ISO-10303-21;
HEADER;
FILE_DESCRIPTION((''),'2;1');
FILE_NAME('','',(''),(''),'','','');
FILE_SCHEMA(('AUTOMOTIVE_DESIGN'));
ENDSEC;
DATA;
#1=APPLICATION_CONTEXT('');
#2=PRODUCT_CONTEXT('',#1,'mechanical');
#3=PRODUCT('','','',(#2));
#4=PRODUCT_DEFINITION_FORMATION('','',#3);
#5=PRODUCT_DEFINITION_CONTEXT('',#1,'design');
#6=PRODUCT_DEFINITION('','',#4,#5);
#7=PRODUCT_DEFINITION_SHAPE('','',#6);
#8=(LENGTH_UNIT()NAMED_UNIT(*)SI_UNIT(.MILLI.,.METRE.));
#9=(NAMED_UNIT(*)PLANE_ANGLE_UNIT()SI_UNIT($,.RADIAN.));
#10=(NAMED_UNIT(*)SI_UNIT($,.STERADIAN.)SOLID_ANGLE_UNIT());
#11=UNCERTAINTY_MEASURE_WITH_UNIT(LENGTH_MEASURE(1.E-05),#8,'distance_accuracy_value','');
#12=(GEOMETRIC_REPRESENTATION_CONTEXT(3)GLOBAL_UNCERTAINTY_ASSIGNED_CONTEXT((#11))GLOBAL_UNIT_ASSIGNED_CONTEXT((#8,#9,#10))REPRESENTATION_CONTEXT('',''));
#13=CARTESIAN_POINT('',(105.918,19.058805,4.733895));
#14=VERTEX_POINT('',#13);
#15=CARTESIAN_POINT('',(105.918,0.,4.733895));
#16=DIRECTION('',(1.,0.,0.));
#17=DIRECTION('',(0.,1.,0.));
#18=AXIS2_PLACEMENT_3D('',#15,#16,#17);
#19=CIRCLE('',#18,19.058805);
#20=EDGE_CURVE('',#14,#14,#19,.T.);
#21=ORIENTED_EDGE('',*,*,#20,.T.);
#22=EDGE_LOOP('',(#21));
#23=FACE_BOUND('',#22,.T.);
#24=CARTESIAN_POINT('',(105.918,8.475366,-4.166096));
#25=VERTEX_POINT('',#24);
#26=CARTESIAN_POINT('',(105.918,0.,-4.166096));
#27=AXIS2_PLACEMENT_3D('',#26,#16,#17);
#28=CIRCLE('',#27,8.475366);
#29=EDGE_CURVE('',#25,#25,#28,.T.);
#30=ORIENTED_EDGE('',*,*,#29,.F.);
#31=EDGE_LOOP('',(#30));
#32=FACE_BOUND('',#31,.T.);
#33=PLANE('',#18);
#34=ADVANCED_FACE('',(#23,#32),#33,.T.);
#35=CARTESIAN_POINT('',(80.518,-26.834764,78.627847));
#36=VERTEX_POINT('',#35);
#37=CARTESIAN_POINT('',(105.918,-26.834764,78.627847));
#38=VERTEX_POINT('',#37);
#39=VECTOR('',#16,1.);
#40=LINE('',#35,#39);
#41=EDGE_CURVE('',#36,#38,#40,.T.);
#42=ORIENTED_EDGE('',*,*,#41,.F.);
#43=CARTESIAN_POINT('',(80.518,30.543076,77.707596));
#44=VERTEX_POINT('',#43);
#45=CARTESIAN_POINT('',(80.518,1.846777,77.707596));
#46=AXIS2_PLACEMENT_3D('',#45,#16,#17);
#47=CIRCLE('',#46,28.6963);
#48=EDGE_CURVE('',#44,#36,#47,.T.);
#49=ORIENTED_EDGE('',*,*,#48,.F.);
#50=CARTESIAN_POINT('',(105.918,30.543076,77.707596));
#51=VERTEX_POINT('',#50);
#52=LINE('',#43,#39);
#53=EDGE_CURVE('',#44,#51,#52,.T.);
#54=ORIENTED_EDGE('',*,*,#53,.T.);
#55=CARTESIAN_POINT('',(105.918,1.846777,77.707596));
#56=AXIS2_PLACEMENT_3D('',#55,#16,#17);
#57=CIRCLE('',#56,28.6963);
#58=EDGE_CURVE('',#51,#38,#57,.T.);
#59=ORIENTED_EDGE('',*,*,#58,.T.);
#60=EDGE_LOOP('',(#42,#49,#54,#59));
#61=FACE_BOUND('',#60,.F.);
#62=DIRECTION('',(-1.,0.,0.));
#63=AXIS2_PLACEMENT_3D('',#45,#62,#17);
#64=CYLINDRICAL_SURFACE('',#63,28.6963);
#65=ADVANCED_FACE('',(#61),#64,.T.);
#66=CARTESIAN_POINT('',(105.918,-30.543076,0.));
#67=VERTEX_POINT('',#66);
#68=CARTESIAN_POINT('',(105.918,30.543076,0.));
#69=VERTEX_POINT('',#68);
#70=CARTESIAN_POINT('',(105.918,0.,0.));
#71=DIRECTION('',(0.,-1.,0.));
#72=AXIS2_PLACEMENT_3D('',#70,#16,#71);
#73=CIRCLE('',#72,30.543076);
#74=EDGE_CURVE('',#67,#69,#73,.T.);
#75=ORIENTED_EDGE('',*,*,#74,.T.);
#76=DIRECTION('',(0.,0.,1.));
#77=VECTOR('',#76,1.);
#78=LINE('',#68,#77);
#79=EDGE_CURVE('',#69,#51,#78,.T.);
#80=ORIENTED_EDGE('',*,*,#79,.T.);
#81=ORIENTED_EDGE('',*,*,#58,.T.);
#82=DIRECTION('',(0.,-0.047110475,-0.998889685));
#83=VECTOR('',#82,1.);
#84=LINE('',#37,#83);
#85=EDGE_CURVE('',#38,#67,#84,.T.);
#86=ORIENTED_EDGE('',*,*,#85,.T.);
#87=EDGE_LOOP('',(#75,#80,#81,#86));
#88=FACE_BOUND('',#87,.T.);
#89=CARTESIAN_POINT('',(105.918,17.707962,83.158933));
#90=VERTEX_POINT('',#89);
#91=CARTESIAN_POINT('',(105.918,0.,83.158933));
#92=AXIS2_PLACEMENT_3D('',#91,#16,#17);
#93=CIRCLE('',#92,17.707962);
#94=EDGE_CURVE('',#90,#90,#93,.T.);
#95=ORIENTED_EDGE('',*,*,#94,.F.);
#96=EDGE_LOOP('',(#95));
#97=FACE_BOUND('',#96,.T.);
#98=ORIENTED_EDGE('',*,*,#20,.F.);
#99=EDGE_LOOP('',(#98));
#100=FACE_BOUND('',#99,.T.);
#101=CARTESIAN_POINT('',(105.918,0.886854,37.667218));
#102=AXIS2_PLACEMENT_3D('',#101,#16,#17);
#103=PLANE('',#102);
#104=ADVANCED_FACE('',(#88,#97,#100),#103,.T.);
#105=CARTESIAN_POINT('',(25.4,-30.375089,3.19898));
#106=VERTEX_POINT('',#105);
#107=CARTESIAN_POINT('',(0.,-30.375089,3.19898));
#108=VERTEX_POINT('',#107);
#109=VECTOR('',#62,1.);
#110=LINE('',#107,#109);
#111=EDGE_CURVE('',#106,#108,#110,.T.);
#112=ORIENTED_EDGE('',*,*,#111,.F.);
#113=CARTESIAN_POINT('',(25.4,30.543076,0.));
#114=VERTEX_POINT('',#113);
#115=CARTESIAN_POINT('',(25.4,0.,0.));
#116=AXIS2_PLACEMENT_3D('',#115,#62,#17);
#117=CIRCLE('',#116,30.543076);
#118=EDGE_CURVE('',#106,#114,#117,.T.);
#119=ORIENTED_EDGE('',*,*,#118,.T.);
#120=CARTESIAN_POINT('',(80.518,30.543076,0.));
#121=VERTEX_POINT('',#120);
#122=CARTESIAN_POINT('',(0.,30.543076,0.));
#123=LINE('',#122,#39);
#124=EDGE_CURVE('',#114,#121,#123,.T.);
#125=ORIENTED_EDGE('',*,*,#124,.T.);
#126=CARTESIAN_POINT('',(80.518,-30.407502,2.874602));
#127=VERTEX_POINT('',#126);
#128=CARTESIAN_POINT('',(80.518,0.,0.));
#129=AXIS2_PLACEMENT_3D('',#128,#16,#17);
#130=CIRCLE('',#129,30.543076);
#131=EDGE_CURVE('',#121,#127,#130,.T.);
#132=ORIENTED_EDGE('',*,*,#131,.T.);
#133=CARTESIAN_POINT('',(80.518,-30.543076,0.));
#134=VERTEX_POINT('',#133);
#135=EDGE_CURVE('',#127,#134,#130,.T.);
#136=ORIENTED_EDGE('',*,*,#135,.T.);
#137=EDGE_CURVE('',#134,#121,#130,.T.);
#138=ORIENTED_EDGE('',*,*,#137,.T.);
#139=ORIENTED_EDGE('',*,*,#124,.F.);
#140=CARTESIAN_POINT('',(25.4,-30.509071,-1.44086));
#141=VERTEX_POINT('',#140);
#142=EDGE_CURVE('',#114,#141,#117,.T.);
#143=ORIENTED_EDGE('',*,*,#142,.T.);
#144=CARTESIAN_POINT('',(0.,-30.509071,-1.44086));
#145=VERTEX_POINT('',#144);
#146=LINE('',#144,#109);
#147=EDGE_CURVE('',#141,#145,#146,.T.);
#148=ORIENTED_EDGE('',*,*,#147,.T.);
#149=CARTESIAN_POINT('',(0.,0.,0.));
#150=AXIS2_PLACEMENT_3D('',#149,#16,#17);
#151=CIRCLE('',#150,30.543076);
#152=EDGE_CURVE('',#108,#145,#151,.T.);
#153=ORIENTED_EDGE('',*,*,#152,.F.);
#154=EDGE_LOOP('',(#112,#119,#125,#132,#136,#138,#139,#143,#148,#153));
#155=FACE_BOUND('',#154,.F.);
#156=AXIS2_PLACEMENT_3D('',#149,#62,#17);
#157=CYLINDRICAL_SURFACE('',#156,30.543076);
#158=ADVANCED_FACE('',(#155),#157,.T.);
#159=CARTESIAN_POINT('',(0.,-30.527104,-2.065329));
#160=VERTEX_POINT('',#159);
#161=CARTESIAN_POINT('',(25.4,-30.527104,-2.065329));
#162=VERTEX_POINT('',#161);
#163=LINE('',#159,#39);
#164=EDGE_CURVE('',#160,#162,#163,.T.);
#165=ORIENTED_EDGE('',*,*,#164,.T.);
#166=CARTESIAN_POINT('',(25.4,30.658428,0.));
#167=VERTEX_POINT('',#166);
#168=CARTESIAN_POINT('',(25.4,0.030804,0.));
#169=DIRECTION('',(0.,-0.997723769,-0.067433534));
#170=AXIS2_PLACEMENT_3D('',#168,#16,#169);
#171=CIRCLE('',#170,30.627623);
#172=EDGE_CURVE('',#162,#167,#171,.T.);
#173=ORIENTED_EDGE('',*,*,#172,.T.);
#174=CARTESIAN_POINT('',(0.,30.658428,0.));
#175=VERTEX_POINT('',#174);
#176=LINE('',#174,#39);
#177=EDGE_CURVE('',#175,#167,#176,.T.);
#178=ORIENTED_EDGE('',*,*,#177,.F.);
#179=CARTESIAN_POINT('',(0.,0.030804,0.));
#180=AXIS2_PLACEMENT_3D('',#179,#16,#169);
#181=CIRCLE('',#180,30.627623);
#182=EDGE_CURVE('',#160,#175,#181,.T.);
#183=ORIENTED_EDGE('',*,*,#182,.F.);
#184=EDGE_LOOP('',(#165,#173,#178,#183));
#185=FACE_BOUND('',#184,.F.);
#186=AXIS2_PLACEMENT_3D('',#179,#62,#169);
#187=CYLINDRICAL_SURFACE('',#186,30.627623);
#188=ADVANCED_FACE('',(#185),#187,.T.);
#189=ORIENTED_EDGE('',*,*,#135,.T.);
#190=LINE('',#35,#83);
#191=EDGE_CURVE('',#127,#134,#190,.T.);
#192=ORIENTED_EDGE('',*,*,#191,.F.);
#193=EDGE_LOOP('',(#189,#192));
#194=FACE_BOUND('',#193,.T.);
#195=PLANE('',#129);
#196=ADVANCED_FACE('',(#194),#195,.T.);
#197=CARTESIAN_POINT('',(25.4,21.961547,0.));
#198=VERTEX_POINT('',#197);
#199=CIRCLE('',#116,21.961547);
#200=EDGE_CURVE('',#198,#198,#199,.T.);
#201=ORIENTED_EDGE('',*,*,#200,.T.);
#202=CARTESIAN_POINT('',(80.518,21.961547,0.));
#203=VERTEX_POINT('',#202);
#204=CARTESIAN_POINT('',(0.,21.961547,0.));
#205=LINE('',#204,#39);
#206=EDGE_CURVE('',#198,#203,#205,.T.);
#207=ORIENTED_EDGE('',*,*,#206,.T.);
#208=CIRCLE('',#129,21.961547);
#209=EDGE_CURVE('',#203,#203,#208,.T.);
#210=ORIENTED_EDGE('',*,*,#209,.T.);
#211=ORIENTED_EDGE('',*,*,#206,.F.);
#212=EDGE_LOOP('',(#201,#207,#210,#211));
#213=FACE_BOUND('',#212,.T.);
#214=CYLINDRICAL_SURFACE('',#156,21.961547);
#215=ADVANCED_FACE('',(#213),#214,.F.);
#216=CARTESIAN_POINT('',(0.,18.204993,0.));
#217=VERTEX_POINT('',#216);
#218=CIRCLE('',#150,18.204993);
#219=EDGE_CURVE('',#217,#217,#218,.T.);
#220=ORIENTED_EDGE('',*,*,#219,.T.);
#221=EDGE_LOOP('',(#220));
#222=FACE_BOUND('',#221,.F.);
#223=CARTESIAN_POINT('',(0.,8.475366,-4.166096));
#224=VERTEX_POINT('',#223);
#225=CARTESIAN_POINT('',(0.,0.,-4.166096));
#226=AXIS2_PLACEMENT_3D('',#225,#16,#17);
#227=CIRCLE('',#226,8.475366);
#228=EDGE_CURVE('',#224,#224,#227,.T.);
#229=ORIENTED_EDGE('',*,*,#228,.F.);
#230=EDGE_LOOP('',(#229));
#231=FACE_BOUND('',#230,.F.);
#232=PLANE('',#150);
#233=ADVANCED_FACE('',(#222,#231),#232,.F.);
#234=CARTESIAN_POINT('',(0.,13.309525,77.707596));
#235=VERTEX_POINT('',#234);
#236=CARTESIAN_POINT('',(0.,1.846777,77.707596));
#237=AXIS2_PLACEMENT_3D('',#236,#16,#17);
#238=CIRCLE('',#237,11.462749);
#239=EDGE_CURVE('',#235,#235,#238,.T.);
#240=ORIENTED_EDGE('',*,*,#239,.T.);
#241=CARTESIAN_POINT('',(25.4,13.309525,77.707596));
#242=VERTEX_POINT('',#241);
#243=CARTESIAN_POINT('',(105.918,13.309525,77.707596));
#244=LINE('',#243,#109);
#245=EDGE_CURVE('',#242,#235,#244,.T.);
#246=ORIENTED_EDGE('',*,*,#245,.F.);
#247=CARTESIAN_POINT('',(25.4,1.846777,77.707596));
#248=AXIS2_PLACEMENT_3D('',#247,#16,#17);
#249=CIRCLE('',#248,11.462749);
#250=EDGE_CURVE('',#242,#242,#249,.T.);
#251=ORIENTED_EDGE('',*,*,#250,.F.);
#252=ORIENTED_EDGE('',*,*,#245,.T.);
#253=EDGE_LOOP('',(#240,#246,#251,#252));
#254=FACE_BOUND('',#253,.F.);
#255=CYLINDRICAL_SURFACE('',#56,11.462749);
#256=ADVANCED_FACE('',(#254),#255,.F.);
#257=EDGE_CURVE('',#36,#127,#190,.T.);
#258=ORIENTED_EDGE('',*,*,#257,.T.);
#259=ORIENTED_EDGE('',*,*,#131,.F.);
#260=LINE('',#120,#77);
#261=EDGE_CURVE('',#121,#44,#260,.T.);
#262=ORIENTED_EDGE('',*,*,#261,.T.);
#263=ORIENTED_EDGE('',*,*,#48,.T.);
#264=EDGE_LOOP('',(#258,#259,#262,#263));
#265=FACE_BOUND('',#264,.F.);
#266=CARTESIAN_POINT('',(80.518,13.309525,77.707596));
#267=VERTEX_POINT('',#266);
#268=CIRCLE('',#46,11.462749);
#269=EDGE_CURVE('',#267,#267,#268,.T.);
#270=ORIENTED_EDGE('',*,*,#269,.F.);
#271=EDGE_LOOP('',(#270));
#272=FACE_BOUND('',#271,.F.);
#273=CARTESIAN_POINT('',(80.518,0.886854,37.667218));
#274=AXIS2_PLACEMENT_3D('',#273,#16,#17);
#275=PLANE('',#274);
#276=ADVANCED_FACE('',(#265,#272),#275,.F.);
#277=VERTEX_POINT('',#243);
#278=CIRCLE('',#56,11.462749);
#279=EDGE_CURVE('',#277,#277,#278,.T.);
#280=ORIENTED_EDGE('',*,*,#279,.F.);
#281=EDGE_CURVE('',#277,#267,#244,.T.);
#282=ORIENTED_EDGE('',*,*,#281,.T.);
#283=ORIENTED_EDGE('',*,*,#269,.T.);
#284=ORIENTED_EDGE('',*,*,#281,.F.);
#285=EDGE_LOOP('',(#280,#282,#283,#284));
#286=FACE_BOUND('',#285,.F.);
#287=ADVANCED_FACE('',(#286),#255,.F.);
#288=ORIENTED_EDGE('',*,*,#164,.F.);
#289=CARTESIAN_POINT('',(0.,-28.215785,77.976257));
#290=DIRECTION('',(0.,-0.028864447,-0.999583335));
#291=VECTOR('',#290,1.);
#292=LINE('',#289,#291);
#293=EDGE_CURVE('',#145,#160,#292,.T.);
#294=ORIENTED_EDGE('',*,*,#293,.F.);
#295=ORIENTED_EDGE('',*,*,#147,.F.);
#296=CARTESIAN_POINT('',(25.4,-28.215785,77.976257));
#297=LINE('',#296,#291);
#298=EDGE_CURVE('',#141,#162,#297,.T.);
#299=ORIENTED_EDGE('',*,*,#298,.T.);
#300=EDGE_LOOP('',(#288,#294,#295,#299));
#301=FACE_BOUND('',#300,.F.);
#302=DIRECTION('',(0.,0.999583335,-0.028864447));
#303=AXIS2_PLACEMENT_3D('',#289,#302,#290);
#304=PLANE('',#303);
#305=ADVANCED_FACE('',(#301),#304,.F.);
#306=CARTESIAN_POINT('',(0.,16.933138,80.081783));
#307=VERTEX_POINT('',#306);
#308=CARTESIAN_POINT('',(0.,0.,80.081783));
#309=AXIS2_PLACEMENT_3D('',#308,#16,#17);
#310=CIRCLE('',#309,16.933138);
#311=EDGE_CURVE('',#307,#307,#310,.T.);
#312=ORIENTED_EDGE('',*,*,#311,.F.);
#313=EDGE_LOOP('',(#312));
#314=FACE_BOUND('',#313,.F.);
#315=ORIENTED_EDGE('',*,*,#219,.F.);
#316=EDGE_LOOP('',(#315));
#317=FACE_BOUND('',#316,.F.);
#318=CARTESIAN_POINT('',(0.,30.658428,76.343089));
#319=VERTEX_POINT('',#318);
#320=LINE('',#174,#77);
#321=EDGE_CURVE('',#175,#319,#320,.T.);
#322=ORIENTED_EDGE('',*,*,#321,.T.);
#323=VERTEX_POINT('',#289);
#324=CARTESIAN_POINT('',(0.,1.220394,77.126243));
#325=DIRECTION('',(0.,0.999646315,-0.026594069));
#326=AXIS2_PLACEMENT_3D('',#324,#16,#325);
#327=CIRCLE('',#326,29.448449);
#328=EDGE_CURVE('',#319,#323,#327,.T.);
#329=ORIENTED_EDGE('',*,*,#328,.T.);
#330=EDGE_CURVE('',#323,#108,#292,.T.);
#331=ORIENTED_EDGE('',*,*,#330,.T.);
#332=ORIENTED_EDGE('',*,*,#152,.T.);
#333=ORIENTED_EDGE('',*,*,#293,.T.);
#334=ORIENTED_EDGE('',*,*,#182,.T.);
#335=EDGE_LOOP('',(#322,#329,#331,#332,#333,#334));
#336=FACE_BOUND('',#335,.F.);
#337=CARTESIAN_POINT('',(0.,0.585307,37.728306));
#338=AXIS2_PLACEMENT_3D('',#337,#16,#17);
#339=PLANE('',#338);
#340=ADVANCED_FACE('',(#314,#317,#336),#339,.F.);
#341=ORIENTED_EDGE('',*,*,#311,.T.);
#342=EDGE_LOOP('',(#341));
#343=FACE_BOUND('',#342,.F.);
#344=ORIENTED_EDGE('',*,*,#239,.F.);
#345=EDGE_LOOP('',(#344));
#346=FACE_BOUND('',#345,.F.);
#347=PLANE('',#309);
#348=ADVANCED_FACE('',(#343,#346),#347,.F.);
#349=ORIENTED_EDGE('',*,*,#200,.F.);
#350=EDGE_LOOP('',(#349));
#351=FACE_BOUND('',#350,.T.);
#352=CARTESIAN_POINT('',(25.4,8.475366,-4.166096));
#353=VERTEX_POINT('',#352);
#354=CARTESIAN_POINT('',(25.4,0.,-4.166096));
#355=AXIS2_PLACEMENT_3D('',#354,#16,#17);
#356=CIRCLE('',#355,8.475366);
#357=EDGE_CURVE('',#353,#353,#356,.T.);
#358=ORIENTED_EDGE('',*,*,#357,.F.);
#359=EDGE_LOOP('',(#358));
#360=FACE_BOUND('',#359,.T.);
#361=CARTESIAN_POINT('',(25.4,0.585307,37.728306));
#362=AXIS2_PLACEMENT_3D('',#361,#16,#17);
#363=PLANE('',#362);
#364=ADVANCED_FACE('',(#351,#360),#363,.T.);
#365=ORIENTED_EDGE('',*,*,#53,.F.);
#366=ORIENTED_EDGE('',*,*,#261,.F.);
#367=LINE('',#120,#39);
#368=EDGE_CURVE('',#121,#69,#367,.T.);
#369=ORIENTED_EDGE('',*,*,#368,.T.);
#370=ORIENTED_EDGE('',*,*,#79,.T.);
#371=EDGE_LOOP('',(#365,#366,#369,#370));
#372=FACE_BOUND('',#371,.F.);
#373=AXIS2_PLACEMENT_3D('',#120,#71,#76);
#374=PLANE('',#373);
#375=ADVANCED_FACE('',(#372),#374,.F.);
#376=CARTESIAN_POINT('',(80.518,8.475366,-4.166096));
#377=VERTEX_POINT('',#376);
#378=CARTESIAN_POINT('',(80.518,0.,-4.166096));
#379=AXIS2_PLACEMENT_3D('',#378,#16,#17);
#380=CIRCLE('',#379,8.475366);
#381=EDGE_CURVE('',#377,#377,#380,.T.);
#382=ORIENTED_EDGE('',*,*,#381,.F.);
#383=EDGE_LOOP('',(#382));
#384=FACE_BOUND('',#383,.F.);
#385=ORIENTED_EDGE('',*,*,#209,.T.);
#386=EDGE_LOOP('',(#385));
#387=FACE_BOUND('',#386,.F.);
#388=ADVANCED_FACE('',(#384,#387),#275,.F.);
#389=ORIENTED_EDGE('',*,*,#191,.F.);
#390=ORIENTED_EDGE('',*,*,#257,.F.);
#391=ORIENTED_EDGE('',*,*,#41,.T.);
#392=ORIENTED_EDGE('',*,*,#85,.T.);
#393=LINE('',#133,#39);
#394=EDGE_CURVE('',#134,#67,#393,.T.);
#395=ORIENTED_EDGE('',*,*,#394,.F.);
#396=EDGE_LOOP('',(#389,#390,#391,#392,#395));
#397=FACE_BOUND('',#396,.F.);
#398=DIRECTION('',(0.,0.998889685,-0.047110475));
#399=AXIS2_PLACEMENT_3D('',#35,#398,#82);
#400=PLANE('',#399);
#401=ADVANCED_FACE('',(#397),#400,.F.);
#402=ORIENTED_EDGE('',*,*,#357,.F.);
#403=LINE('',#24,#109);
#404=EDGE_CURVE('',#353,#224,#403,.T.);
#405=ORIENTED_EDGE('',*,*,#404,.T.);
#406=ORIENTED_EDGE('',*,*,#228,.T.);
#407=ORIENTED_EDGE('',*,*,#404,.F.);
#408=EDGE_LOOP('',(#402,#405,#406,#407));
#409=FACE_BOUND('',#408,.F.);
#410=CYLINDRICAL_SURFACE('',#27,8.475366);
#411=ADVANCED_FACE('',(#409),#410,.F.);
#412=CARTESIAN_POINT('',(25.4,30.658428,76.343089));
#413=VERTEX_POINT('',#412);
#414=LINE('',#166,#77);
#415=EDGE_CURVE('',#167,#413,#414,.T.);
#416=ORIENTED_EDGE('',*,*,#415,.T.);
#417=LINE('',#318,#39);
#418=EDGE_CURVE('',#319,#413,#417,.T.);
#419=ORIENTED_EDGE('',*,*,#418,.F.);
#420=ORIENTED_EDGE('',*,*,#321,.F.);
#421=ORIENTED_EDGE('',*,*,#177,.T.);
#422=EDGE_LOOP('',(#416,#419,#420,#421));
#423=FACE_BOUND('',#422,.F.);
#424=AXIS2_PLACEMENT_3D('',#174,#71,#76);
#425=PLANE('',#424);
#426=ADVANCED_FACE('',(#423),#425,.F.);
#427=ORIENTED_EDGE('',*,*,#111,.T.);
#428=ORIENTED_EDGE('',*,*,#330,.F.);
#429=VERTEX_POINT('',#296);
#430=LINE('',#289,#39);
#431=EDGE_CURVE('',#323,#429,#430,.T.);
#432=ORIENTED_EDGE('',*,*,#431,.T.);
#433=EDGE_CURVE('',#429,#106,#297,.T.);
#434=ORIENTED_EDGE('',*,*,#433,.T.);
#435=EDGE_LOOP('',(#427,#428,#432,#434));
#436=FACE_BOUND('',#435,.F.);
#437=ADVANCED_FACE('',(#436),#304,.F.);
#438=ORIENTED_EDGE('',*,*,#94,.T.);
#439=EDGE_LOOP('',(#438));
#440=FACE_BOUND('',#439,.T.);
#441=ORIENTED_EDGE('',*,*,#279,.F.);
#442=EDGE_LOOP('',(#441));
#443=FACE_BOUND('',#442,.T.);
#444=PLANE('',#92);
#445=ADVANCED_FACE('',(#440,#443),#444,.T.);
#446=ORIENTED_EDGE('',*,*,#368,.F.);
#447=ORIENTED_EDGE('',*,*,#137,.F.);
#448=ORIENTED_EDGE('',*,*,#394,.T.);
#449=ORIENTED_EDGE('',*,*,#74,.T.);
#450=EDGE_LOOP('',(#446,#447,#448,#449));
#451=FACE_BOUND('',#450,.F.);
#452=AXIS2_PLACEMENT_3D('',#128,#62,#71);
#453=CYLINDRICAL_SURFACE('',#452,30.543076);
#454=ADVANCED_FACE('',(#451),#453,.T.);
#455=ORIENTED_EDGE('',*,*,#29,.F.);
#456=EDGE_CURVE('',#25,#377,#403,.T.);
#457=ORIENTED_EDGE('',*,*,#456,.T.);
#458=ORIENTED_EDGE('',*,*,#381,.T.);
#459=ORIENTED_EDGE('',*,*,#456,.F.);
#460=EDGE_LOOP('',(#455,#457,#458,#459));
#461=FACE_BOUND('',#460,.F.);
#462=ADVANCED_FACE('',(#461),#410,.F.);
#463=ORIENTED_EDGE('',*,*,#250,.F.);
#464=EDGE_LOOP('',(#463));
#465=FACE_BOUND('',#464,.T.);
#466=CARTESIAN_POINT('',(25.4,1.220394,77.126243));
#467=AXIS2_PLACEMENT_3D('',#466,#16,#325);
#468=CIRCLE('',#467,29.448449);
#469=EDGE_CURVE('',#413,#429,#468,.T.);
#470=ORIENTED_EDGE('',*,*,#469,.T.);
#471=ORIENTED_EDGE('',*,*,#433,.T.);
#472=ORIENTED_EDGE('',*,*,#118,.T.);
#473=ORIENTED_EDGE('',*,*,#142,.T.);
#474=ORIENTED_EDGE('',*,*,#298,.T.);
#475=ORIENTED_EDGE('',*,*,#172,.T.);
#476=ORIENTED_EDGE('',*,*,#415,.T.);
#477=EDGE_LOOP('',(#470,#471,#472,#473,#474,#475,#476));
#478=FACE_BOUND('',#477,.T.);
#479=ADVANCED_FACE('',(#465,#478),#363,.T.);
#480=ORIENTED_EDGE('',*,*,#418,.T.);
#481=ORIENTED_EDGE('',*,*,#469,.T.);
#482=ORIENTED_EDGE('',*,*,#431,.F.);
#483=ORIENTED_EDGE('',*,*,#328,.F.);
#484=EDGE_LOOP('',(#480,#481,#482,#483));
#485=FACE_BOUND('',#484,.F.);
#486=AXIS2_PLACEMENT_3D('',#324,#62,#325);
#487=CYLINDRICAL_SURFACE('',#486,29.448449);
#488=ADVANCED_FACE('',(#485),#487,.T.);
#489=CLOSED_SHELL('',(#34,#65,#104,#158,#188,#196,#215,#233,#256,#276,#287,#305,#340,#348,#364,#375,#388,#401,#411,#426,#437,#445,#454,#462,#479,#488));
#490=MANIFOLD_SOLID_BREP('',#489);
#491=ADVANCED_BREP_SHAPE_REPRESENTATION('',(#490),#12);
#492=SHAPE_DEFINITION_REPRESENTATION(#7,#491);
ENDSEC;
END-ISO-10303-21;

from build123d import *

# Parameters (mm, degrees)
F0_R      = 30.5430762162
F0_R_2    = 21.9615472454
F1_DEPTH  = 80.518
F3_DEPTH  = 25.4
F5_DEPTH  = 25.4
F6_R      = 18.2049933001
F6_R_2    = 16.9331377315
F7_DEPTH  = 24.384
F8_R      = 17.7079617299
F8_R_2    = 19.0588053324
F9_DEPTH  = 24.638
F10_R     = 11.4627485179
F11_DEPTH = 317.246
F12_R     = 8.4753659895
F13_DEPTH = 402.082


# Not quite as in the source:
# - a feature names something its author has since deleted; it is built from what else it names


with BuildPart() as f1:
    # F0 (on Right) → F1 (new body)
    with BuildSketch(Plane.YZ):
        Circle(F0_R)
        Circle(F0_R_2, mode=Mode.SUBTRACT)
    extrude(amount=F1_DEPTH)

    # F2 (on Right) → F3 (join)
    with BuildSketch(Plane.YZ):
        with BuildLine():
            ThreePointArc((-30.5271036923, -2.0653288811), (1.0640567768, -30.6101895865), (30.6584276259, 0))
            Line((30.6584276259, 0), (30.6584276259, 76.3430893421))
            ThreePointArc((30.6584276259, 76.3430893421), (2.0369783495, 106.5633685136), (-28.2157845795, 77.976256609))
            Line((-28.2157845795, 77.976256609), (-30.5271036923, -2.0653288811))
        make_face()
    extrude(amount=F3_DEPTH)

    # F4 (on face) → F5 (join)
    with BuildSketch(Plane.YZ.offset(80.518)):
        with BuildLine():
            Line((-26.8347635865, 78.6278471351), (-30.5430762162, 0))
            ThreePointArc((-30.5430762162, 0), (0, -30.5430762162), (30.5430762162, 0))
            Line((30.5430762162, 0), (30.5430762162, 77.7075961232))
            ThreePointArc((30.5430762162, 77.7075961232), (2.3069613013, 106.4002056349), (-26.8347635865, 78.6278471351))
        make_face()
    extrude(amount=F5_DEPTH)

    # F6 (on Right) → F7 (join)
    with BuildSketch(Plane.YZ):
        Circle(F6_R)
        with Locations((0, 80.0817832351)):
            Circle(F6_R_2)
    extrude(amount=F7_DEPTH)

    # F8 (on face) → F9 (join)
    with BuildSketch(Plane.YZ.offset(105.918)):
        with Locations((0, 83.1589326262)):
            Circle(F8_R)
        with Locations((0, 4.7338949516)):
            Circle(F8_R_2)
    extrude(amount=-F9_DEPTH)

    # F10 (on face) → F11 (cut)
    with BuildSketch(Plane.YZ.offset(105.918)):
        with Locations((1.8467766198, 77.7075961232)):
            Circle(F10_R)
    extrude(amount=-F11_DEPTH, mode=Mode.SUBTRACT)

    # F12 (on face) → F13 (cut)
    with BuildSketch(Plane.YZ.offset(105.918)):
        with Locations((0, -4.1660955176)):
            Circle(F12_R)
    extrude(amount=-F13_DEPTH, mode=Mode.SUBTRACT)


solid = f1.part
